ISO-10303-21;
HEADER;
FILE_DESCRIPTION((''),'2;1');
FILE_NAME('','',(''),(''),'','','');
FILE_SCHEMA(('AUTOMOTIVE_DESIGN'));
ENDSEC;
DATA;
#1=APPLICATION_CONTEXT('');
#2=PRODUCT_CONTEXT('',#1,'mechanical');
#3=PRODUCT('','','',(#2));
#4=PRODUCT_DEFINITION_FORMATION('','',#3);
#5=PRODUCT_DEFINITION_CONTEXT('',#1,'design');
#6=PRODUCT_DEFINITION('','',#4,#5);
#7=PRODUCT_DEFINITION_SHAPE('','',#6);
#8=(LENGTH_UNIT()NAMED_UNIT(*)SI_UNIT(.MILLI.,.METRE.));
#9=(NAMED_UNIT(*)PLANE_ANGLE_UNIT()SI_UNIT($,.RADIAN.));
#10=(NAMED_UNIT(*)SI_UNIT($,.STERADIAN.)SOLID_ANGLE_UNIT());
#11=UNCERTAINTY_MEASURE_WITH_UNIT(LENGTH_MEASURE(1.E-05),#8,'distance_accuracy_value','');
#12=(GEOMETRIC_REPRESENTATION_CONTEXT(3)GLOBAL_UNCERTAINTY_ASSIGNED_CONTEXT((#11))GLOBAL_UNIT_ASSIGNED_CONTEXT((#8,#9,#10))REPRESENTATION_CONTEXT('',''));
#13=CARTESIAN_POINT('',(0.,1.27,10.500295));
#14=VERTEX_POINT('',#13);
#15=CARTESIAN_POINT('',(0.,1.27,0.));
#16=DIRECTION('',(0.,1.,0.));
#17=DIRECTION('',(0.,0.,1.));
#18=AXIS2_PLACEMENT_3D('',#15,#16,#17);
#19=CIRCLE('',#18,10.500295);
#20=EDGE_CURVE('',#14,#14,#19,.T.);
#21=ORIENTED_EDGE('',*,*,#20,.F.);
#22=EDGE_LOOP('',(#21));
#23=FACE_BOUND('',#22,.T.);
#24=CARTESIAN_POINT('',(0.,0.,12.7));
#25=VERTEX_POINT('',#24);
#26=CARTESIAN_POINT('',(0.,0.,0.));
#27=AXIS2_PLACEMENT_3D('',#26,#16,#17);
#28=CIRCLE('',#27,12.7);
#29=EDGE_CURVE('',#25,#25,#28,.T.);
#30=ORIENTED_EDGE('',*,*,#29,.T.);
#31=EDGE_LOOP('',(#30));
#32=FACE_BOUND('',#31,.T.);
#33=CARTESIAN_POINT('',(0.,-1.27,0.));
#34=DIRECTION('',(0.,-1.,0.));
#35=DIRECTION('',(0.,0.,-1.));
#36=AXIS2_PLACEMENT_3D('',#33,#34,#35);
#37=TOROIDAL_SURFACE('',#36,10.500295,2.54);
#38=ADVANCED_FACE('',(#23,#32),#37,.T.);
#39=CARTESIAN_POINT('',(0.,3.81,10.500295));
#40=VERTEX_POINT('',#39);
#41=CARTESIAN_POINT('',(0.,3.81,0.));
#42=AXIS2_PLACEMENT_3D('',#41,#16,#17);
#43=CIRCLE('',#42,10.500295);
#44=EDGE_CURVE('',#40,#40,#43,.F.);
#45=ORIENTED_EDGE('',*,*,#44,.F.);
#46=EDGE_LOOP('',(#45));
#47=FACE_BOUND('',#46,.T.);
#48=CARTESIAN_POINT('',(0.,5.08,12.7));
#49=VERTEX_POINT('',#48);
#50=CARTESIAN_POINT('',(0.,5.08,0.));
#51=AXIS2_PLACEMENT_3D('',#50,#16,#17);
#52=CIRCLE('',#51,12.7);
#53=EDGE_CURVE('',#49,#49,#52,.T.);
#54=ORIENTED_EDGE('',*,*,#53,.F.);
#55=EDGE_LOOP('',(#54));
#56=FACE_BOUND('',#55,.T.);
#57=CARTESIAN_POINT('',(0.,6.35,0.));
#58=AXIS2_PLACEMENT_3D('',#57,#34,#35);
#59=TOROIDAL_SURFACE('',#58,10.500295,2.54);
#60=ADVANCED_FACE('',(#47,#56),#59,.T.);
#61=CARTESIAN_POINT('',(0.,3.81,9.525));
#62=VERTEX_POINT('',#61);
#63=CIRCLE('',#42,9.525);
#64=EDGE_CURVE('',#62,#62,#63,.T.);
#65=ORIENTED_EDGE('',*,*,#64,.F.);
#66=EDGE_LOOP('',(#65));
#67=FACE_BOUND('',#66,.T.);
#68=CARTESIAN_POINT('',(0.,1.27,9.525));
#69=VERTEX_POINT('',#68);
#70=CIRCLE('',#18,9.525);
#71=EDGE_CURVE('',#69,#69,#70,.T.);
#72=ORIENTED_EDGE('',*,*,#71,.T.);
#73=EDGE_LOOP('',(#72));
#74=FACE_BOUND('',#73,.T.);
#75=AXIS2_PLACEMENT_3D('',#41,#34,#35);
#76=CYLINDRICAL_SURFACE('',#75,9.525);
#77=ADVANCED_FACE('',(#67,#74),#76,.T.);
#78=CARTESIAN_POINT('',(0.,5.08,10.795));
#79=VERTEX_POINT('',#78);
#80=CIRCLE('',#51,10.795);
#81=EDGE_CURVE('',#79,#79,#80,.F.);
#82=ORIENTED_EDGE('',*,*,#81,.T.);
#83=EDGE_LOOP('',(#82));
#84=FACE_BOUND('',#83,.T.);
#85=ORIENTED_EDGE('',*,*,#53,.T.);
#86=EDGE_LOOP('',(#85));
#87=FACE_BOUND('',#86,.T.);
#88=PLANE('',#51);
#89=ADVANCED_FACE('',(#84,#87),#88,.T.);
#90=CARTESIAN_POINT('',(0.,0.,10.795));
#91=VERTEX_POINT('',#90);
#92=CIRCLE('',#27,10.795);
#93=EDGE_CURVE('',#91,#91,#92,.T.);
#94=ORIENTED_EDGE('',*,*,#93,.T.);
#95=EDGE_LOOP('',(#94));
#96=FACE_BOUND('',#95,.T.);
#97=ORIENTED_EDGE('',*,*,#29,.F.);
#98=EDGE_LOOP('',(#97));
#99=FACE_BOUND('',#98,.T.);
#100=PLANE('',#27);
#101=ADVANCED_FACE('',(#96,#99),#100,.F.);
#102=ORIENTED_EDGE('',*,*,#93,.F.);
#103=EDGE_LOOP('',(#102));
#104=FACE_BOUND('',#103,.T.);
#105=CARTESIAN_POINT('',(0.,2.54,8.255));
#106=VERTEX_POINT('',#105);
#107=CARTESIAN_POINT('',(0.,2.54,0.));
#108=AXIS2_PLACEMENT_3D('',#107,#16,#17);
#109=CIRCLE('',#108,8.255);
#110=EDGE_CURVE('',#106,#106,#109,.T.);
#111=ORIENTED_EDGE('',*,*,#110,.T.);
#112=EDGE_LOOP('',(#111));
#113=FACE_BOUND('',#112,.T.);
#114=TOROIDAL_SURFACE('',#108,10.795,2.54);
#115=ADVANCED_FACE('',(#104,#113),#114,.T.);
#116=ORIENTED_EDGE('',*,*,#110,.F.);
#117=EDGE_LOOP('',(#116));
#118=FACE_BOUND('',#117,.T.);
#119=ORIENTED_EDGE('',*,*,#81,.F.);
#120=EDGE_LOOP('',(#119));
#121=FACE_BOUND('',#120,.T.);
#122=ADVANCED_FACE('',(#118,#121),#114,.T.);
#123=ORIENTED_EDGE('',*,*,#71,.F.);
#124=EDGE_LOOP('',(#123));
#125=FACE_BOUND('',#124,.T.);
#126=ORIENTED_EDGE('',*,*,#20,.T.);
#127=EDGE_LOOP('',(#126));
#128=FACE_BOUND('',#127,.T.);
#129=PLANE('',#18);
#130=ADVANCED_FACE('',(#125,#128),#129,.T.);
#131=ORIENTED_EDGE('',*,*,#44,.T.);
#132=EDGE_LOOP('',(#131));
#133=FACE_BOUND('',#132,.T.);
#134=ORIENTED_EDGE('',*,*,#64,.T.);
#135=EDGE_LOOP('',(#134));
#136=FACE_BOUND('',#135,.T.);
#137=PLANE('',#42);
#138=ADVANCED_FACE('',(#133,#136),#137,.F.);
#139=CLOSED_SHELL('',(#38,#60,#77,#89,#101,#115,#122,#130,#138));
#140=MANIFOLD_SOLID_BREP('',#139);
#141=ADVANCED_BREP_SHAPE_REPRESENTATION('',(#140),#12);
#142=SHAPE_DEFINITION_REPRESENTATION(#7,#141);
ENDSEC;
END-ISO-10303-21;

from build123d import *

# Parameters (mm, degrees)
SKETCH1_R           = 12.7
BOSS_EXTRUDE1_DEPTH = 1.27
SKETCH2_R           = 9.525
BOSS_EXTRUDE2_DEPTH = 2.54
SKETCH3_R           = 12.7
BOSS_EXTRUDE3_DEPTH = 1.27
SHELL1_OUTLINE_R    = 8.255
SHELL1_DEPTH        = 5.08
FILLET1_R           = 2.54
FILLET2_R           = 2.54


# Read off the part's stored shape, not the designer's step: Shell1
# Some blends are built 0.0001 mm under size
with BuildPart() as part:
    # Sketch1 → Boss-Extrude1 (new body)
    with BuildSketch(Plane(origin=(0, 0, 0), x_dir=(1, 0, 0), z_dir=(0, 1, 0))):
        with Locations(Location((0, 0, 0), (0, 0, 270))):
            Circle(SKETCH1_R)
    extrude(amount=BOSS_EXTRUDE1_DEPTH)

    # Sketch2 → Boss-Extrude2 (add)
    with BuildSketch(Plane(origin=(0, 1.27, 0), x_dir=(1, 0, 0), z_dir=(0, 1, 0))):
        with Locations(Location((0, 0, 0), (0, 0, 270))):
            Circle(SKETCH2_R)
    extrude(amount=BOSS_EXTRUDE2_DEPTH)

    # Sketch3 → Boss-Extrude3 (add)
    with BuildSketch(Plane(origin=(0, 3.81, 0), x_dir=(1, 0, 0), z_dir=(0, 1, 0))):
        with Locations(Location((0, 0, 0), (0, 0, 270))):
            Circle(SKETCH3_R)
    extrude(amount=BOSS_EXTRUDE3_DEPTH)

    # Shell1 outline → Shell1 (cut)
    with BuildSketch(Plane(origin=(0, 0, 0), x_dir=(1, 0, 0), z_dir=(0, 1, 0))):
        Circle(SHELL1_OUTLINE_R)
    extrude(amount=SHELL1_DEPTH, mode=Mode.SUBTRACT)

    # Fillet1
    # the kernel refuses this fillet: 2.54 mm, written as the material it takes off along each edge
    with BuildSketch(Plane(origin=(0, 1.27, 0), x_dir=(0, 0, 1), z_dir=(-1, 0, 0))) as fillet1_piece_1:
        with BuildLine():
            CenterArc((10.500295474, -2.54), FILLET1_R, 30, 60)
            Line((12.7, -1.27), (12.743994091, -1.2446))
            ThreePointArc((12.743994091, -1.2446), (12.7508, -0.635), (12.7508, 0))
            Line((12.7508, 0), (12.7, 0.0508))
            Line((12.7, 0.0508), (10.500295474, 0.0508))
            Line((10.500295474, 0.0508), (10.500295474, 0))
        make_face()
    revolve(axis=Axis((0, 1.27, 0), (0, 1, 0)), mode=Mode.SUBTRACT)
    with BuildSketch(Plane(origin=(0, 3.81, 0), x_dir=(0, 0, 1), z_dir=(-1, 0, 0))) as fillet1_piece_2:
        with BuildLine():
            CenterArc((10.500295474, 2.54), FILLET1_R, 270, 60)
            Line((10.500295474, 0), (10.500295474, -0.0508))
            Line((10.500295474, -0.0508), (12.7, -0.0508))
            Line((12.7, -0.0508), (12.7508, 0))
            ThreePointArc((12.7508, 0), (12.7508, 0.635), (12.743994091, 1.2446))
            Line((12.743994091, 1.2446), (12.7, 1.27))
        make_face()
    revolve(axis=Axis((0, 3.81, 0), (0, 1, 0)), mode=Mode.SUBTRACT)

    # Fillet2
    fillet2_edges = [part.edges().sort_by_distance(p)[0] for p in [
        (-8.255, 5.08, 0),
        (-8.255, 0, 0),
    ]]
    fillet(fillet2_edges, radius=FILLET2_R - 0.0001)  # a hair under: the kernel refuses the full size


solid = part.part
